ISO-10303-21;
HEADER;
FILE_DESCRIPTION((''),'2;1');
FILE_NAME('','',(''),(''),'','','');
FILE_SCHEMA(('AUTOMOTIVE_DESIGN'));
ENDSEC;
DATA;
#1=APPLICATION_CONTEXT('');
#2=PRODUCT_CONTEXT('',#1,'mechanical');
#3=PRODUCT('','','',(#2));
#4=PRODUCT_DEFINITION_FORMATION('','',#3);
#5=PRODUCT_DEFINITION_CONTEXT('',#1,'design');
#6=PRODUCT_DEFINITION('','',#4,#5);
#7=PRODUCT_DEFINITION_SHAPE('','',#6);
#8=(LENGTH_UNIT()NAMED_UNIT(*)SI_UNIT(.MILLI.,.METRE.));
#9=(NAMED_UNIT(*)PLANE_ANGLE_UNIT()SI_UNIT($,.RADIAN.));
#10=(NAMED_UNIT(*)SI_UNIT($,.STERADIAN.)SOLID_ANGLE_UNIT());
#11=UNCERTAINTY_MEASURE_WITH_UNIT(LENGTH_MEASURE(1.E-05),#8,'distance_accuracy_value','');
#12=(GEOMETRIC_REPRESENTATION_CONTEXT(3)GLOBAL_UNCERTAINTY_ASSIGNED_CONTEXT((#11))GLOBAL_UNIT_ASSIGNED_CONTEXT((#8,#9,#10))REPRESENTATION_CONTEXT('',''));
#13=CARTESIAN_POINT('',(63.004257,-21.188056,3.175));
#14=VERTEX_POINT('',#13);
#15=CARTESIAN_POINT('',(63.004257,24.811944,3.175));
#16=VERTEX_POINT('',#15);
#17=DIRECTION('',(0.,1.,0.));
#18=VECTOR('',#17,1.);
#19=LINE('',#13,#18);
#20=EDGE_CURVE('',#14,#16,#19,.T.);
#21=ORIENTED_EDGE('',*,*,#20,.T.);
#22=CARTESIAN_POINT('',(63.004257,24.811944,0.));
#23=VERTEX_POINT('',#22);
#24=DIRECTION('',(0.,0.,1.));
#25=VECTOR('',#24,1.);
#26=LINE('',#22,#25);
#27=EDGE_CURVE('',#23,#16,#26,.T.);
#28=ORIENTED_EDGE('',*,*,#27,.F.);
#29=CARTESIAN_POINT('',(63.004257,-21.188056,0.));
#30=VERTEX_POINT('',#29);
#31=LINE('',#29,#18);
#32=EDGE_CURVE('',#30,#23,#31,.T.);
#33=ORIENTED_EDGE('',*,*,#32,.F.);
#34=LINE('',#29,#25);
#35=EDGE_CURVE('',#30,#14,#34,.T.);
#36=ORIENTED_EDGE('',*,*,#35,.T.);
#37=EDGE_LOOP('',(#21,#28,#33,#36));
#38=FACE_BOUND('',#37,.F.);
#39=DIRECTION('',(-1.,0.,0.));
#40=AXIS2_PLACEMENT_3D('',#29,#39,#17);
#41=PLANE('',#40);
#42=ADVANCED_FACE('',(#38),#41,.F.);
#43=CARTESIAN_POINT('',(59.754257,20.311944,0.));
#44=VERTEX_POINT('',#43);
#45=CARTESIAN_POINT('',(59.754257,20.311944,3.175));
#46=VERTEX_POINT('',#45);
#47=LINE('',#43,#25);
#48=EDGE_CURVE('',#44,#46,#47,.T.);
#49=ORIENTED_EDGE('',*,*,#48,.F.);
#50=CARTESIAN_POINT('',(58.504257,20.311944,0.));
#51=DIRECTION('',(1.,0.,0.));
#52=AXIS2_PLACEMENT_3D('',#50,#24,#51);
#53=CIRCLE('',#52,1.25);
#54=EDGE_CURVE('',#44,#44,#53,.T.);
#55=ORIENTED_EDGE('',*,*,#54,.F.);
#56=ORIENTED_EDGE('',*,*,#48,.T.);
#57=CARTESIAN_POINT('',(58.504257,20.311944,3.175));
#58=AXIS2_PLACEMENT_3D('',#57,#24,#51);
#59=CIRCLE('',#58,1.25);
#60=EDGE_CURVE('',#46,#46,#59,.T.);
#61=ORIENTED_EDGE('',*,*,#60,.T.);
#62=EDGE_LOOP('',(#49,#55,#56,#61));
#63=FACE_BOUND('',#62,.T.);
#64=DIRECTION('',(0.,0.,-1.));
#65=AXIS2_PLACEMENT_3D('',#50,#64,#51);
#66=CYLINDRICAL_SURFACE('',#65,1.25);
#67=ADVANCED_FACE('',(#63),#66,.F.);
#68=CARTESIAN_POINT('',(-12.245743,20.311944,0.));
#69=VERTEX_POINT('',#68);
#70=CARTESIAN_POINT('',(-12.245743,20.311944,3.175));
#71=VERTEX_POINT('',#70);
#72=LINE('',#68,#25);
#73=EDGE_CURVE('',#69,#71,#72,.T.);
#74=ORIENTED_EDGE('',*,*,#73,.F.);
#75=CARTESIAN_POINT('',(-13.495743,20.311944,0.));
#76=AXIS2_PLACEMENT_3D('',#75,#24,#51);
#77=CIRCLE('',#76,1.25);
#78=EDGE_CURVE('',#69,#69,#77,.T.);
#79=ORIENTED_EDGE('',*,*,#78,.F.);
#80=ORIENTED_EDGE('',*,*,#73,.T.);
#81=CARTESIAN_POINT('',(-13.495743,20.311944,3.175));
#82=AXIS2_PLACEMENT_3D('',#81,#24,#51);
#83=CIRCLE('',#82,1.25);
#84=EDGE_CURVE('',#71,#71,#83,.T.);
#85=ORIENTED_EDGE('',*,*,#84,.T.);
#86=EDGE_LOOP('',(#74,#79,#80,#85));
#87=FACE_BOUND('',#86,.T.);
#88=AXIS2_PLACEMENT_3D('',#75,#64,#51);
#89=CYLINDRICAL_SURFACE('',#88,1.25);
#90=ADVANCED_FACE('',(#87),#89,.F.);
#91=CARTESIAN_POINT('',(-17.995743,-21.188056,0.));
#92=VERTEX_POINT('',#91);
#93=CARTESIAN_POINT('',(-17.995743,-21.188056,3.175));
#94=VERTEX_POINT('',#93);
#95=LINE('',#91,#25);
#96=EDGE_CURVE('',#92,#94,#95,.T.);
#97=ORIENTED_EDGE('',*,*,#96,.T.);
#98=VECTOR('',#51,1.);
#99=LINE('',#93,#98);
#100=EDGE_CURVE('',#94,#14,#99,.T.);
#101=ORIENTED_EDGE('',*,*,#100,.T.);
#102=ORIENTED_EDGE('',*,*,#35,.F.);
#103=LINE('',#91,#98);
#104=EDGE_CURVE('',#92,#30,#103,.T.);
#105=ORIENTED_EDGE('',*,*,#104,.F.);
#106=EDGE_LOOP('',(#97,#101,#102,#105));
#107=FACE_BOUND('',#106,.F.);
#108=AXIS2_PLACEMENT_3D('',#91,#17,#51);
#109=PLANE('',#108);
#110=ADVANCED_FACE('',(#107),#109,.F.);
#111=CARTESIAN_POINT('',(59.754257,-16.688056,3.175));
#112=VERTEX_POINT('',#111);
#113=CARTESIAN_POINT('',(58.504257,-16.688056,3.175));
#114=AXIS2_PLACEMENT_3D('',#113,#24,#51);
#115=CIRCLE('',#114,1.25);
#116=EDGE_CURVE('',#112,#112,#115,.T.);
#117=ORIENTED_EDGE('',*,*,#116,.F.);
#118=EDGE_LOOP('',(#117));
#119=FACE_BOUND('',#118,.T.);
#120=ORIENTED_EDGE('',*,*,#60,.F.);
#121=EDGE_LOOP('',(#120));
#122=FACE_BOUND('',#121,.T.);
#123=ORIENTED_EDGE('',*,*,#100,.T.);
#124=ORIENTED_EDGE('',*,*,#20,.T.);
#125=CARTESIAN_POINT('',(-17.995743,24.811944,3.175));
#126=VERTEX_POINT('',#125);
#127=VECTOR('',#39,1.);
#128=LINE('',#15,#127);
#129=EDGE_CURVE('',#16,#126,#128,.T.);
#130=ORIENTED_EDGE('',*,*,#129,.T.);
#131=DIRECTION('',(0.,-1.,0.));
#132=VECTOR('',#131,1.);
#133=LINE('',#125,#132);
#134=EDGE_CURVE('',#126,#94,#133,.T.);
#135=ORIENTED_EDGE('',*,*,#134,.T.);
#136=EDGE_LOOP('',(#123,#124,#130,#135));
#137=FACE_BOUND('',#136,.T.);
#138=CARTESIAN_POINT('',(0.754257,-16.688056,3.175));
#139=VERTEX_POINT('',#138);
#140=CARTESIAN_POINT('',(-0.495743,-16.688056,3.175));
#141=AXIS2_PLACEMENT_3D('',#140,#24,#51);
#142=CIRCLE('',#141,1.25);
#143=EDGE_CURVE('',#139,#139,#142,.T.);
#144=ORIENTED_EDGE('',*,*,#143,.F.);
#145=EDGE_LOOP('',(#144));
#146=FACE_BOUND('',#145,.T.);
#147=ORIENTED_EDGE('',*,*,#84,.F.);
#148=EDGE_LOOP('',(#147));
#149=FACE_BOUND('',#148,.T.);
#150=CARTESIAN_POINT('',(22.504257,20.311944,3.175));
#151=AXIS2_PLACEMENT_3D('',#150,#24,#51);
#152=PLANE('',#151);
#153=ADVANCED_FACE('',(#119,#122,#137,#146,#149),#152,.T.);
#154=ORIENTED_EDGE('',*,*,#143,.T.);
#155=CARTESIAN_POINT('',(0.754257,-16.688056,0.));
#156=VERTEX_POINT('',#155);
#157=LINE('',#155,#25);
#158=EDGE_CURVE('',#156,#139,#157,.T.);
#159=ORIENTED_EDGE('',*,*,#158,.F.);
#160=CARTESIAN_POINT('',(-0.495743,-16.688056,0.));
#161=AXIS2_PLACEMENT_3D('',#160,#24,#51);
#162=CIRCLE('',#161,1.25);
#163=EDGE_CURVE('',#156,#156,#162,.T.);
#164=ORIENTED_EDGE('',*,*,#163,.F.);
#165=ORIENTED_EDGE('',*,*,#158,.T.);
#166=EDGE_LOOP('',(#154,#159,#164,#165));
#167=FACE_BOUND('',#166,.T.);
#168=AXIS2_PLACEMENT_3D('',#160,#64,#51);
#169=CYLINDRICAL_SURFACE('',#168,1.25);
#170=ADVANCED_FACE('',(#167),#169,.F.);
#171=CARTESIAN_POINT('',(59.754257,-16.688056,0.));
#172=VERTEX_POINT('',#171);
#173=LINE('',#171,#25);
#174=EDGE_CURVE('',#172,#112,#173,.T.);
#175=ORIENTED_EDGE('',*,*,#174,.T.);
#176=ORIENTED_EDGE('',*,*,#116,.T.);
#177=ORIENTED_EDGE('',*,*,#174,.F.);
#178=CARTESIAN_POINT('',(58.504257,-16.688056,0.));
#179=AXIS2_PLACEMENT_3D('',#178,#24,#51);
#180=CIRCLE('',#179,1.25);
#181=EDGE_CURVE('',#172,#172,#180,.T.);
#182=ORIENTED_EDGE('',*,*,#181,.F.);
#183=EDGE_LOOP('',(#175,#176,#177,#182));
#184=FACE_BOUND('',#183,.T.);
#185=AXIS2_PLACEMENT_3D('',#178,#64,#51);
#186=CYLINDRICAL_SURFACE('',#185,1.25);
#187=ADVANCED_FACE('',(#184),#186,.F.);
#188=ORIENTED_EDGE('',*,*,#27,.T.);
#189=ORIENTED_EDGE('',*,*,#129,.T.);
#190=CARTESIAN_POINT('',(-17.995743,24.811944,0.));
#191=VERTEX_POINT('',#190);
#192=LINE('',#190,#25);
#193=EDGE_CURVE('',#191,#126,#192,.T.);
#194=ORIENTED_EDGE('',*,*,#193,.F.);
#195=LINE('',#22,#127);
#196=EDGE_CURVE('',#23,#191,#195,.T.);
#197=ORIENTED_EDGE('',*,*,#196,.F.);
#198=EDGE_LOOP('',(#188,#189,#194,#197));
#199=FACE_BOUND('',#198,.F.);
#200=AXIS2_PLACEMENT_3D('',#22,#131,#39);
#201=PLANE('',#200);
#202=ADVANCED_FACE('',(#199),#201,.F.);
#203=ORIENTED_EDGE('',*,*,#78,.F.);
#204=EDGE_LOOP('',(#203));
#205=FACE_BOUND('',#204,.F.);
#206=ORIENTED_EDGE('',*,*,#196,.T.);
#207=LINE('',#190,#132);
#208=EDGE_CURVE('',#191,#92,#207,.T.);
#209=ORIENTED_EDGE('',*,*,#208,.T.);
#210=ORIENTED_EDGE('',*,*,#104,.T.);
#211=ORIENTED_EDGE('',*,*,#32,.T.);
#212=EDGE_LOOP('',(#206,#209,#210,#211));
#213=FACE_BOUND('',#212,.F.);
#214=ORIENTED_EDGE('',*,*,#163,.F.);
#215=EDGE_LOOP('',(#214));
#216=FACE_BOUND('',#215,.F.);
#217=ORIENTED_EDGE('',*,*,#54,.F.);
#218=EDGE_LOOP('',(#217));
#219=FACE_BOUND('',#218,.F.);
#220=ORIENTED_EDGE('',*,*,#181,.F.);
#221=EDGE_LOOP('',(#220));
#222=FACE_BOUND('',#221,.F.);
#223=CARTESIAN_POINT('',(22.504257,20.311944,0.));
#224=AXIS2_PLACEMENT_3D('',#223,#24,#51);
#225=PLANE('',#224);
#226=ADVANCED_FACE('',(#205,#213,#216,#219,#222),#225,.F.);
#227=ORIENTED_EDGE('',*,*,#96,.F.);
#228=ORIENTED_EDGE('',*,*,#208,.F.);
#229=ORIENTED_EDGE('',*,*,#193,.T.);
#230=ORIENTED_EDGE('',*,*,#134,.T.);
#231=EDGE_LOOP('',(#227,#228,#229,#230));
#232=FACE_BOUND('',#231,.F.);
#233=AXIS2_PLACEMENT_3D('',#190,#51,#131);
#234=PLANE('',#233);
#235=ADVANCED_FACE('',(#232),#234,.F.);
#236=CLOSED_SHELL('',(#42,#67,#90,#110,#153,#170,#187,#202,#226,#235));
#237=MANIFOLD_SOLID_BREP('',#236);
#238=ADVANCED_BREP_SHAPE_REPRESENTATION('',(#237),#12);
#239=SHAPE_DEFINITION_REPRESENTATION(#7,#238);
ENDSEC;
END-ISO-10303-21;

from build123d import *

# Parameters (mm, degrees)
F0_R     = 1.25
F0_W     = 68
F0_H     = 9
F1_DEPTH = 3.175


# Not quite as in the source:
# - a length typed as a fraction of an inch, garbled in the dataset ("3 / 203.2 mm" for 3/8 in), is restored
# - a feature names something its author has since deleted; it is built from what else it names


with BuildPart() as f1:
    # F0 (on Top) → F1 (new body)
    with BuildSketch(Plane.XY):
        Polygon((63.0042573512, 24.8119444549), (-17.9957426488, 24.8119444549), (-17.9957426488, 15.8119444549), (22.5042573512, 15.8119444549), (63.0042573512, 15.8119444549), align=None)
        with Locations((-13.4957426488, 20.3119444549)):
            Circle(F0_R, mode=Mode.SUBTRACT)
        with Locations((58.5042573512, 20.3119444549)):
            Circle(F0_R, mode=Mode.SUBTRACT)
        Polygon((22.5042573512, 15.8119444549), (-17.9957426488, 15.8119444549), (-17.9957426488, -21.1880555451), (-4.9957426488, -21.1880555451), (-4.9957426488, -12.1880555451), (63.0042573512, -12.1880555451), (63.0042573512, 15.8119444549), align=None)
        with Locations((29.0042573512, -16.6880555451)):
            Rectangle(F0_W, F0_H)
        with Locations((-0.4957426488, -16.6880555451)):
            Circle(F0_R, mode=Mode.SUBTRACT)
        with Locations((58.5042573512, -16.6880555451)):
            Circle(F0_R, mode=Mode.SUBTRACT)
    extrude(amount=F1_DEPTH)


solid = f1.part
